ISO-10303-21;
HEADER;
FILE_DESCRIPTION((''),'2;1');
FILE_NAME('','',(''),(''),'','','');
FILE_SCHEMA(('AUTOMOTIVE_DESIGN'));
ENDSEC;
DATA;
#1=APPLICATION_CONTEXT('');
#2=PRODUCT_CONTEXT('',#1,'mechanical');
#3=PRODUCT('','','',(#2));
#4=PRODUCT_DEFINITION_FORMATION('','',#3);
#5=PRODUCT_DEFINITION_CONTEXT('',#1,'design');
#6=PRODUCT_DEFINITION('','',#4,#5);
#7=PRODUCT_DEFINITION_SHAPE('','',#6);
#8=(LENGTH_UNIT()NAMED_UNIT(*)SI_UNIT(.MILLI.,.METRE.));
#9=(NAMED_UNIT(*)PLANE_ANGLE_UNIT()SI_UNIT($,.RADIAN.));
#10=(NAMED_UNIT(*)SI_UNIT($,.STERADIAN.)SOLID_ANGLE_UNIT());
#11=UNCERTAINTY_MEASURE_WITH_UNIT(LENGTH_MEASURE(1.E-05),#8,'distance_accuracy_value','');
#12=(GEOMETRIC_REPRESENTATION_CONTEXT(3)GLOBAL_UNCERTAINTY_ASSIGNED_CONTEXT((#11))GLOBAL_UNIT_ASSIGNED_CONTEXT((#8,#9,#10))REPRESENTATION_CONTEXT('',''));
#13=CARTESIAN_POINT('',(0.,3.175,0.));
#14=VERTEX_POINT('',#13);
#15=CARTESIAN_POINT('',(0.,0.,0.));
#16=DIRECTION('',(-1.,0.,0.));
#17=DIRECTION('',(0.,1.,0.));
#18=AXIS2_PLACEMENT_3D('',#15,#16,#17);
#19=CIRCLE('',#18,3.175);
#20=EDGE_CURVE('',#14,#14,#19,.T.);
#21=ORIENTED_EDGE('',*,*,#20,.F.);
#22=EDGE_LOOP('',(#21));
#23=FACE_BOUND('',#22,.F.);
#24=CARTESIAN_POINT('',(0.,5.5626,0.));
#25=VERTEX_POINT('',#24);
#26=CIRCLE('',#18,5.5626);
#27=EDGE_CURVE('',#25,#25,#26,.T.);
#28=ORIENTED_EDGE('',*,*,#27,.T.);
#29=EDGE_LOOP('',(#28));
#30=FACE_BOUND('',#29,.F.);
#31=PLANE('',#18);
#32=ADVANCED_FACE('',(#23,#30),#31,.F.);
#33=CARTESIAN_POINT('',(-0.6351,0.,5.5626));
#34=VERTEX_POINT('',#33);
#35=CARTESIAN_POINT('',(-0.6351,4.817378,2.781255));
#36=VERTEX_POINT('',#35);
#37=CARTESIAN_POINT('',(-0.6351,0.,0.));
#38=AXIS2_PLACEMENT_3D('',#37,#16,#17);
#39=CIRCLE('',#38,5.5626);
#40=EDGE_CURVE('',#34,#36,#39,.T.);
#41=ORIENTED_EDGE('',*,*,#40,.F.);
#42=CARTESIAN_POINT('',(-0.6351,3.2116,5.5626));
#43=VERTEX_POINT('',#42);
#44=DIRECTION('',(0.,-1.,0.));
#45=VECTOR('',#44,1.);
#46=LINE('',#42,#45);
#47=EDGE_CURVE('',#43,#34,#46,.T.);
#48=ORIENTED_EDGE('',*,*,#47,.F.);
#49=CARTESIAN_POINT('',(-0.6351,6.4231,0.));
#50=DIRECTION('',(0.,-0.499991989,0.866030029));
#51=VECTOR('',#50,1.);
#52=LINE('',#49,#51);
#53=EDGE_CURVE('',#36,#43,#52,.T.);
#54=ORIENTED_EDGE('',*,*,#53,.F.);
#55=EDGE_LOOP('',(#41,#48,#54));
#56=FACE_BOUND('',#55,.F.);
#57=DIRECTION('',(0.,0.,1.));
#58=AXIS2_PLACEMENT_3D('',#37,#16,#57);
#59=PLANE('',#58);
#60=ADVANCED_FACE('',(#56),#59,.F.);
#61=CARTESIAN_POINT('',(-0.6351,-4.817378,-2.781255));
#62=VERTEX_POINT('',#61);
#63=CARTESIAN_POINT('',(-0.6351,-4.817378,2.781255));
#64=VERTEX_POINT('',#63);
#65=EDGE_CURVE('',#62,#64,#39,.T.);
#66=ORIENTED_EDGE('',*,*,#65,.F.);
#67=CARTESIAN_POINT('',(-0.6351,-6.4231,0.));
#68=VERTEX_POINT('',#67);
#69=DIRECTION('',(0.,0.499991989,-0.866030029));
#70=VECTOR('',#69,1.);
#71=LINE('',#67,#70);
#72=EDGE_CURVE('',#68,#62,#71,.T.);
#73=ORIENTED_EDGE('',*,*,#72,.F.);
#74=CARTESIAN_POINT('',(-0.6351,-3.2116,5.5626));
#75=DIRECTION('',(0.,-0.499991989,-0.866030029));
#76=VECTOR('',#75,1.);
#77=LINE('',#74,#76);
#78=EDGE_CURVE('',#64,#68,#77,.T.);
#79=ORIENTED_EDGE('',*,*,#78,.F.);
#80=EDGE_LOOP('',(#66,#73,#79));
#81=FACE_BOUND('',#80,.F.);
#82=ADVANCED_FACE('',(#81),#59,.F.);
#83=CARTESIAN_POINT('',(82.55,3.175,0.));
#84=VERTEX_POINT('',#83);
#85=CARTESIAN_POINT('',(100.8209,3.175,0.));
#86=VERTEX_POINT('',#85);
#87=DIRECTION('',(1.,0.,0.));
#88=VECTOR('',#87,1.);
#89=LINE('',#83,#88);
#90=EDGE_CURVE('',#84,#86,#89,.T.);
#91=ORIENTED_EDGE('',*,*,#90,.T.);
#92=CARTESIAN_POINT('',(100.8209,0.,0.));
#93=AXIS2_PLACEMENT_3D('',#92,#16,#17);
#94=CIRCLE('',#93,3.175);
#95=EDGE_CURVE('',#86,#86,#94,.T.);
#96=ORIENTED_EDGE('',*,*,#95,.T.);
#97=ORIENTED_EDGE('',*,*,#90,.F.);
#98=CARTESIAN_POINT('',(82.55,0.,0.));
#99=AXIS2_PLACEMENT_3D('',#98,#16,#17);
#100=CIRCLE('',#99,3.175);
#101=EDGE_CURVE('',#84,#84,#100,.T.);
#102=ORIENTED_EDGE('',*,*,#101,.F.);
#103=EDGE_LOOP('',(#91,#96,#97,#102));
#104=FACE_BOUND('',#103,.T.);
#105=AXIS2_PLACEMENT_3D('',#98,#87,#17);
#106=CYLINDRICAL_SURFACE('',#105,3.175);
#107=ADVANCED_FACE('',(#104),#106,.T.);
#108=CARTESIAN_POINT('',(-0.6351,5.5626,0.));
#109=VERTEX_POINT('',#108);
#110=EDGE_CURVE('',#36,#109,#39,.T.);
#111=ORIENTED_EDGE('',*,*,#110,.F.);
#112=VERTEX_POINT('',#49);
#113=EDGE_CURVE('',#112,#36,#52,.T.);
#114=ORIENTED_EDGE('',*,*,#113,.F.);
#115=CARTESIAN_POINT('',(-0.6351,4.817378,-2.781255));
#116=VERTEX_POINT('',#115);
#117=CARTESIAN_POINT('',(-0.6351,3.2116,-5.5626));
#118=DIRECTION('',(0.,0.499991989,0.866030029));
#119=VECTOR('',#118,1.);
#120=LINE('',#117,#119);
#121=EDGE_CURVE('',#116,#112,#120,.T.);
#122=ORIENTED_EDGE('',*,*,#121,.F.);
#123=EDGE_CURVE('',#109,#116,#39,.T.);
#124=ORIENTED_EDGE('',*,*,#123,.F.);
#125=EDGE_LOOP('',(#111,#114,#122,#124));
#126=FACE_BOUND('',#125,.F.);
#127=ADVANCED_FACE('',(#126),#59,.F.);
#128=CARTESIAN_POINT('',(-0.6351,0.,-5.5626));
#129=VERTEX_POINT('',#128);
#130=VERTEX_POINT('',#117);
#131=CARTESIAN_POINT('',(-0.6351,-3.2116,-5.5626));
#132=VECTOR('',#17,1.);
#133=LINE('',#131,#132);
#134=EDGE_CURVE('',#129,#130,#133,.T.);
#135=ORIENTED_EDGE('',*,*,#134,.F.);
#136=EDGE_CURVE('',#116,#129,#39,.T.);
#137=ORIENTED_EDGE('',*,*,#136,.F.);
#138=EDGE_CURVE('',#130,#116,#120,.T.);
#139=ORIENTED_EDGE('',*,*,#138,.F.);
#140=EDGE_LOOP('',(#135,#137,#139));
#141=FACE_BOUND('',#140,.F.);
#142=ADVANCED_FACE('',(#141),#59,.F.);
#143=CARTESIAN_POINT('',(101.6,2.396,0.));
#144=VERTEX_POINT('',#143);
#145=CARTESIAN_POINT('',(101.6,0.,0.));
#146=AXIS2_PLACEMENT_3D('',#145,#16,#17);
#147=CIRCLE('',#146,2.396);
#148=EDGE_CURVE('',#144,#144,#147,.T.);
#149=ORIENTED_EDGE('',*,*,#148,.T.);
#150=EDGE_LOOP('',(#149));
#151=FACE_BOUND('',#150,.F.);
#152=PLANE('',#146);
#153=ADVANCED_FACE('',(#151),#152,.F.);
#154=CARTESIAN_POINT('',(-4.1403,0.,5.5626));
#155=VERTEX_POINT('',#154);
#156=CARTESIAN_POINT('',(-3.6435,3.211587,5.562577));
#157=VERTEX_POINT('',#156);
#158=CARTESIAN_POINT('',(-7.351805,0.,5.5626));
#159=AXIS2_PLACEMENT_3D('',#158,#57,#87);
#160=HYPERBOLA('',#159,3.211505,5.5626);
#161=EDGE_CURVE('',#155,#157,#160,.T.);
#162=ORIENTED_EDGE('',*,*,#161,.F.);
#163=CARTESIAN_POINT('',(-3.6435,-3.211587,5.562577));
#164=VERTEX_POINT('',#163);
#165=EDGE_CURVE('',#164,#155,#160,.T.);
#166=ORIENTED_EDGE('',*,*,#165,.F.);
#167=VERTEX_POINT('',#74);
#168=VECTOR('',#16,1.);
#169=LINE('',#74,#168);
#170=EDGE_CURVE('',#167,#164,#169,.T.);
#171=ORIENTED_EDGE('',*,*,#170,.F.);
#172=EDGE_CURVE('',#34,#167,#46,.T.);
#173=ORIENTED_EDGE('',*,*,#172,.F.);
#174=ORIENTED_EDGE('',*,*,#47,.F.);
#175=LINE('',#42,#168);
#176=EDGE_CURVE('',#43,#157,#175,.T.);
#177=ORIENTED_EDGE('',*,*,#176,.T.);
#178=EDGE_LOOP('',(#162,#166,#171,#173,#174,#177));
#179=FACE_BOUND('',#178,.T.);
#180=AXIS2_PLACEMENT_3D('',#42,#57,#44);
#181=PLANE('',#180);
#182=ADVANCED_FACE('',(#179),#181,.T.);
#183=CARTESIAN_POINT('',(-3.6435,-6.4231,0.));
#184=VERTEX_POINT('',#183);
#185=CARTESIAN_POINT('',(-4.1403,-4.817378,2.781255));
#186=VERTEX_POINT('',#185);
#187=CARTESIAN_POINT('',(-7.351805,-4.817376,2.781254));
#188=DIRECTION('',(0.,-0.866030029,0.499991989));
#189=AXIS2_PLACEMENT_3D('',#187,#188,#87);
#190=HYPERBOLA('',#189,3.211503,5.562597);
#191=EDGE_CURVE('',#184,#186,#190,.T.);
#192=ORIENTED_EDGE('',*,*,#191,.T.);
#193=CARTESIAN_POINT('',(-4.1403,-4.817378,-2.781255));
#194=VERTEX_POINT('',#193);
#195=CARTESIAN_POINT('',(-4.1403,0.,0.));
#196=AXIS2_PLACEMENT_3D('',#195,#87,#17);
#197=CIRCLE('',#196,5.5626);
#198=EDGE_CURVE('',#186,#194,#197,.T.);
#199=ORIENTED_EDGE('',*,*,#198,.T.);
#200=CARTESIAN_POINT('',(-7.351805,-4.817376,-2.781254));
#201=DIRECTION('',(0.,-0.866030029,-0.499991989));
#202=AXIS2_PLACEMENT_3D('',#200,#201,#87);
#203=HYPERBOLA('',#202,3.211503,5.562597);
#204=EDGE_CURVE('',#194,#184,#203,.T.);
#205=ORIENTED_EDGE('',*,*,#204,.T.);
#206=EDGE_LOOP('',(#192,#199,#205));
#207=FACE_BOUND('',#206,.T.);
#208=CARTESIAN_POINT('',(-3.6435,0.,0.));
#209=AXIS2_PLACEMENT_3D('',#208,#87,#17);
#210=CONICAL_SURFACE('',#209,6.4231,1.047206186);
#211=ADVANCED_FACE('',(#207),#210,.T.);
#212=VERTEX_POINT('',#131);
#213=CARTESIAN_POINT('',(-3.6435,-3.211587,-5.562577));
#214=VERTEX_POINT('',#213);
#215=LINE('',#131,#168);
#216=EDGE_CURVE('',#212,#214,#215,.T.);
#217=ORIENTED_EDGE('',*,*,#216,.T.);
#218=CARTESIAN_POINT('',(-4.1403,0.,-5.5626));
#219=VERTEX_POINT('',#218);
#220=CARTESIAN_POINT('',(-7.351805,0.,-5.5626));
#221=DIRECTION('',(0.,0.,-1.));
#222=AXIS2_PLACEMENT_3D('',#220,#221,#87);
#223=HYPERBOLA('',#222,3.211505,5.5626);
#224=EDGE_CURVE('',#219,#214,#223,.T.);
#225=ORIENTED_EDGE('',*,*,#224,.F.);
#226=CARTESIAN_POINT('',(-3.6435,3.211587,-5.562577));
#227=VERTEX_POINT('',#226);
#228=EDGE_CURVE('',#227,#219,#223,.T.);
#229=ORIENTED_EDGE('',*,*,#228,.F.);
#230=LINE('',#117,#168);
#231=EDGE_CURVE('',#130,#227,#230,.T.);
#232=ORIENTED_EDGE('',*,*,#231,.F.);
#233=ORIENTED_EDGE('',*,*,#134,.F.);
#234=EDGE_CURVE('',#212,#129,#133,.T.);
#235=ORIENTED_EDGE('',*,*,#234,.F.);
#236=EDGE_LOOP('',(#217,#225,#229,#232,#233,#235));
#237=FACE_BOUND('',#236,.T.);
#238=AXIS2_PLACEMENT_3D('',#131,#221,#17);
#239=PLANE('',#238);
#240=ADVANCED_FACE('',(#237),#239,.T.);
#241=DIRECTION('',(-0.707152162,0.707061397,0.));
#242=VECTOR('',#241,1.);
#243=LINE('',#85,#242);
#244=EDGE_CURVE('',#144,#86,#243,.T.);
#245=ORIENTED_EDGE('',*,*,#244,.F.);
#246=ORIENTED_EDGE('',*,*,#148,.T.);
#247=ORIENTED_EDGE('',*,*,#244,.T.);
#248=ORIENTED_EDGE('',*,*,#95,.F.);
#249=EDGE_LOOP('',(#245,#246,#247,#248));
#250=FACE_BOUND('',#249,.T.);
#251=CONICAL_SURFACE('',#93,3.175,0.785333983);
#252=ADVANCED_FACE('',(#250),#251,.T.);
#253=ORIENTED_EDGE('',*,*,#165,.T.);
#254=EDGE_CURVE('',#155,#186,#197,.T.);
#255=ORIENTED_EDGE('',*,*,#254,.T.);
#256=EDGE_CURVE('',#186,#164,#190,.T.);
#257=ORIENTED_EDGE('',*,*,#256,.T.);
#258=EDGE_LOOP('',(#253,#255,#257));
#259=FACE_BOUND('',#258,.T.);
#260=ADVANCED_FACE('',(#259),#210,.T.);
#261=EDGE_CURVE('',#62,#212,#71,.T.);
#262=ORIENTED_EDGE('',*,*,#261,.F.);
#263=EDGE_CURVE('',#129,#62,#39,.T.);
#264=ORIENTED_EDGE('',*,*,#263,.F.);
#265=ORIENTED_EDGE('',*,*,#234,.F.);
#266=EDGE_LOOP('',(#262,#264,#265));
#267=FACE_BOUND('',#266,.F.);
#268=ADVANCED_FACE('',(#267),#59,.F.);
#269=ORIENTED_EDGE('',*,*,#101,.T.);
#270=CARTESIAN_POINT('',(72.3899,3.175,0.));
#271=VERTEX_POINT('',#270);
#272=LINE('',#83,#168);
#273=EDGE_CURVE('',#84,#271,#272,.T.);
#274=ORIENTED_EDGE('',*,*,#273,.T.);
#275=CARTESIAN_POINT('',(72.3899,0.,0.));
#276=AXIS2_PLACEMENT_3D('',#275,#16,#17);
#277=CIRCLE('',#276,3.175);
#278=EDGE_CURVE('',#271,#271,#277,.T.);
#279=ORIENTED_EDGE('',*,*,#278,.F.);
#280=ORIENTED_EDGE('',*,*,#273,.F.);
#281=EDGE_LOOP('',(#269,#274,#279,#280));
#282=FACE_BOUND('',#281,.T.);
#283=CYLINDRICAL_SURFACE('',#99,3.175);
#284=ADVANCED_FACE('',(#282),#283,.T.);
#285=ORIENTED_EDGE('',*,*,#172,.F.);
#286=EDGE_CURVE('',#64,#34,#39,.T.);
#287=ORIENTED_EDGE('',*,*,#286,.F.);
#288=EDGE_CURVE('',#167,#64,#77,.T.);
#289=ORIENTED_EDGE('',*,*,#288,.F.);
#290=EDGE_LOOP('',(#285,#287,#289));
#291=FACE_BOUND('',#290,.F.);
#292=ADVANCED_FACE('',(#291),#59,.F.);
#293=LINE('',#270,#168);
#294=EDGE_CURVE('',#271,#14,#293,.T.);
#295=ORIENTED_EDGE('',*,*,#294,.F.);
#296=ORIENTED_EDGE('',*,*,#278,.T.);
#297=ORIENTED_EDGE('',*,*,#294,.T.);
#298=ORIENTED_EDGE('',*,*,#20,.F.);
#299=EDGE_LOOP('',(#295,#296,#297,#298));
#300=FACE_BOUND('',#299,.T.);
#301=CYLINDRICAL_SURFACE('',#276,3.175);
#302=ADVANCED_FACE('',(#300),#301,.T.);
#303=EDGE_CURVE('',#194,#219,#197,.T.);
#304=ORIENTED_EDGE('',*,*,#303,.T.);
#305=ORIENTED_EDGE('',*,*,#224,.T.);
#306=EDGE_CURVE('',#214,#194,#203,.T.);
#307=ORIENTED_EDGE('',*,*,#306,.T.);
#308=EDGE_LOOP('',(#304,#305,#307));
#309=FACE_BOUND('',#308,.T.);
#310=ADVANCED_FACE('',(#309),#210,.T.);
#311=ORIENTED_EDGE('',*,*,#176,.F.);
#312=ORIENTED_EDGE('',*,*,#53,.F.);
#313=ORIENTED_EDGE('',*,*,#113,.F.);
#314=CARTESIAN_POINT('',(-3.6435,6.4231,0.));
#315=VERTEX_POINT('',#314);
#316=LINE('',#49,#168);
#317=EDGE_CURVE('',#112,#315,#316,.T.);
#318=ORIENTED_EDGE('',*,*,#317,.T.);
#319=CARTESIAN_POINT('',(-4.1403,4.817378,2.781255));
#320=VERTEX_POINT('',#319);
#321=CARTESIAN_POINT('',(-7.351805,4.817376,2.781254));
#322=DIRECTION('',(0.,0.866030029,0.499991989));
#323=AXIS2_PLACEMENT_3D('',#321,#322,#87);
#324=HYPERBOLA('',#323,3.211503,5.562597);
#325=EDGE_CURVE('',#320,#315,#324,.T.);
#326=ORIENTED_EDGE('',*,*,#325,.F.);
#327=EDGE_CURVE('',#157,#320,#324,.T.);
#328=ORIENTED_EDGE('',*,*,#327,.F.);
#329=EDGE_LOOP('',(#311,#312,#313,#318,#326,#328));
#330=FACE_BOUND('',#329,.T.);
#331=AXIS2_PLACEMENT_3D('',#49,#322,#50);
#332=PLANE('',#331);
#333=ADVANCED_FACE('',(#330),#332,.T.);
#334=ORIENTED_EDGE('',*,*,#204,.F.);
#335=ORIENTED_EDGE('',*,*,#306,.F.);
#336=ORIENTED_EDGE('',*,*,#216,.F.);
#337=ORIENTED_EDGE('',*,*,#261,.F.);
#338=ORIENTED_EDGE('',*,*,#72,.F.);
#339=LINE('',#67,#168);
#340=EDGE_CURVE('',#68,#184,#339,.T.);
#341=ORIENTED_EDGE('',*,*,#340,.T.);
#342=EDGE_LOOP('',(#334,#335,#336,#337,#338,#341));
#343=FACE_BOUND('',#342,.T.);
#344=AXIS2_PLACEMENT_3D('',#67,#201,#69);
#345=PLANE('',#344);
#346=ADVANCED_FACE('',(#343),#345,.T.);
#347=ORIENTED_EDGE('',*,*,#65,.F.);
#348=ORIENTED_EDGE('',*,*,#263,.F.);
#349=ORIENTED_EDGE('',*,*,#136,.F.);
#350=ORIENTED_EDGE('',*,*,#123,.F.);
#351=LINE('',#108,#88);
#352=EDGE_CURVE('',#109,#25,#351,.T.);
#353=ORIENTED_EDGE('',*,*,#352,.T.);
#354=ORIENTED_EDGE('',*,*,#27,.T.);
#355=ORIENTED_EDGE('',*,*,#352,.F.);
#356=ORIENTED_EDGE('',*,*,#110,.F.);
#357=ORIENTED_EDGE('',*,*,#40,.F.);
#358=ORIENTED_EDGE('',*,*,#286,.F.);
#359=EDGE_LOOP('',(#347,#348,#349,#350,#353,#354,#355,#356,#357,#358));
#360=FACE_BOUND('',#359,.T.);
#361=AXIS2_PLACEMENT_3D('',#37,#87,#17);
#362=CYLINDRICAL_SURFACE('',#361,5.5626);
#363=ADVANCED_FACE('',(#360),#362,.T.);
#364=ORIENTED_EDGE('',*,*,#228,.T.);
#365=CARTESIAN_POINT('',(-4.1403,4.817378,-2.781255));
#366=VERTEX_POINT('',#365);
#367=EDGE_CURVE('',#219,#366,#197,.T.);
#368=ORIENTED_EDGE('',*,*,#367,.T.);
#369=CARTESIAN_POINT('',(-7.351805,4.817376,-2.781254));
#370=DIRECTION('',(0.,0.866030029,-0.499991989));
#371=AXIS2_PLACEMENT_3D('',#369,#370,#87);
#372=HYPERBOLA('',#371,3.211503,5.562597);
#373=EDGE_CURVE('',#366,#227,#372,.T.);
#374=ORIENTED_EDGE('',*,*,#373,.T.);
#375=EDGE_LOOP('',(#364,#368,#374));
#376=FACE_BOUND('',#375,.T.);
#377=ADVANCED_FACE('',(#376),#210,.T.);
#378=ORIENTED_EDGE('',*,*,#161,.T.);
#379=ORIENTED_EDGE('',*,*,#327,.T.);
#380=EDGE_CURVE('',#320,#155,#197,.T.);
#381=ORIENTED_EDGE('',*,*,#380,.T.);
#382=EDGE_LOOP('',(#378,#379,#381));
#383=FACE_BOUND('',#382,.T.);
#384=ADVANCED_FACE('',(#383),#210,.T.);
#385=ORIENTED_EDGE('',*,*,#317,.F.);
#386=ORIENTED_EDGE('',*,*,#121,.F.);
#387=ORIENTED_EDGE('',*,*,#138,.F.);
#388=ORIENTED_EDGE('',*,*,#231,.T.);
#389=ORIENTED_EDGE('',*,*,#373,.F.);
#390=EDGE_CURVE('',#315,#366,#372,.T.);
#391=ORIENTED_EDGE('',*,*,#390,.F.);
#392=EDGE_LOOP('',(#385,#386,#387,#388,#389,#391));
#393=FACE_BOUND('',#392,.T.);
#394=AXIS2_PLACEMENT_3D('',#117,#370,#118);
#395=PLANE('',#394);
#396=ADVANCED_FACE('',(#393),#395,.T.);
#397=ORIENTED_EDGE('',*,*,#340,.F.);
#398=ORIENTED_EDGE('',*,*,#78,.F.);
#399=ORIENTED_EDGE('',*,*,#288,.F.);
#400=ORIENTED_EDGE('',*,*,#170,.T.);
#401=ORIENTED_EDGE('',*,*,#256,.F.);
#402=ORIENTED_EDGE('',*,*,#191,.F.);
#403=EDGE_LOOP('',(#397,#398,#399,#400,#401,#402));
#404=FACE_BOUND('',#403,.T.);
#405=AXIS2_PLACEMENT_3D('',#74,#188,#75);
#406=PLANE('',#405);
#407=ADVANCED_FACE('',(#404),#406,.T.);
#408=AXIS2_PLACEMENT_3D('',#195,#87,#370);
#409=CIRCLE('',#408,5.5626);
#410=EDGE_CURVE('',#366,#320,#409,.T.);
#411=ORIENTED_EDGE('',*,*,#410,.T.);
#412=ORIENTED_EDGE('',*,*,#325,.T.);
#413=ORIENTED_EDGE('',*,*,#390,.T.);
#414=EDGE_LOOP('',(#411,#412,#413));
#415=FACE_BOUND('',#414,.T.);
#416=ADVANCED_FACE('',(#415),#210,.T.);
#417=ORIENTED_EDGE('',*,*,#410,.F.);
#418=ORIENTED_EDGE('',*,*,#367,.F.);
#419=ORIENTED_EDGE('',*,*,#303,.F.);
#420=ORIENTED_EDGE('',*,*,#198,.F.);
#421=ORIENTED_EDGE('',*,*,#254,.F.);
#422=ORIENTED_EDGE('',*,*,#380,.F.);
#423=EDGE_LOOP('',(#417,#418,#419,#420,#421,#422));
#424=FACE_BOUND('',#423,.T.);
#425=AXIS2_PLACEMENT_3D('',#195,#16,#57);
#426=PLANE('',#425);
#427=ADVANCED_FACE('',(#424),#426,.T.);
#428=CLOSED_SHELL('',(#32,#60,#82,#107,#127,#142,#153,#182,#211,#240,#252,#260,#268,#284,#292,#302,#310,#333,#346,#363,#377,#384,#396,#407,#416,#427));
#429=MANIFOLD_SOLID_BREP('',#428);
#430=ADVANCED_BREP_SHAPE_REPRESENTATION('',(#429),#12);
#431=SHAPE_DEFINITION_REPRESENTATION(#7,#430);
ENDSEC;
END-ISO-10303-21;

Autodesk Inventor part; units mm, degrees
ref_plane "YZ Plane" through (0, 0, 0) normal (1, 0, 0) x (0, 1, 0)
ref_plane "XZ Plane" through (0, 0, 0) normal (0, 1, 0) x (-1, 0, 0)
sketch "Sketch1" plane through (0, 0, 0) normal (0, 0, 1) x (1, 0, 0)
  line L0 (0, 5.5626) -> (0, 3.175)
  line L1 (82.55, 3.175) -> (101.6, 3.175)
  line L2 (101.6, 3.175) -> (101.6, 0)
  line L3 (101.6, 0) -> (-0.6351, 0)
  line L4 (-21.0821, 0) -> (122.047, 0) projected
  line L5 (-0.6351, 0) -> (-0.6351, 5.5626)
  line L6 (-0.6351, 5.5626) -> (0, 5.5626)
  line L7 (82.55, 3.175) -> (72.3899, 3.175)
  line L8 (72.3899, 3.175) -> (0, 3.175)
  line L9 (0, -1.1125) -> (0, 6.6751) projected
  dimension "d0" = 101.6
  dimension "d1" = 19.05
  dimension "d2" = 6.35
  dimension "d9" = 0.6351
  dimension "d10" = 11.1252
  dimension "d13" = 10.1601
  dimension "d14" = 6.35
revolve "Body" add sketch "Sketch1" angle 360 about axis through (101.6, 0, 0) along (-1, 0, 0)
sketch "Sketch2" plane through (-0.6351, 0, 0) normal (-1, 0, 0) x (0, 0, 1)
  line L0 (0, 6.4231) -> (5.5626, 3.2116)
  line L1 (5.5626, 3.2116) -> (5.5626, -3.2116)
  line L2 (5.5626, -3.2116) -> (0, -6.4231)
  line L3 (0, -6.4231) -> (-5.5626, -3.2116)
  line L4 (-5.5626, -3.2116) -> (-5.5626, 3.2116)
  line L5 (-5.5626, 3.2116) -> (0, 6.4231)
  point P0 (0, 0)
  point P1 (0, 0)
  dimension "d11" = 11.1252
extrude "Head" add sketch "Sketch2" along normal blind 3.5052
sketch "Sketch4" plane through (0, 0, 0) normal (0, 0, 1) x (1, 0, 0)
  line L0 (-4.1403, 5.5626) -> (-4.1403, 6.4231)
  line L1 (-4.1403, 6.4231) -> (-3.6435, 6.4231)
  line L2 (-3.6435, 6.4231) -> (-4.1403, 5.5626)
  line L3 (-4.8413, 0) -> (0.0659, 0) projected
  line L4 (-0.6351, 6.4231) -> (-4.1403, 6.4231) projected
  line L5 (-4.1403, 3.2116) -> (-4.1403, 6.4231) projected
  dimension "d5" = 30
  dimension "d19" = 11.1252
revolve "Chamfer1" cut sketch "Sketch4" angle 360 about axis through (-10, 0, 0) along (1, 0, 0)
thread "Thread" size "1/4-20 UNC" class "2A" standard "ANSI Unified Screw Threads" length 19.05
chamfer "Chamfer2" distance 0.779 distance2 0.7791 1 edges at (101.6, -3.175, 0) measured on face at (101.6, -0.0416, -0.7018)
ref_plane "Work Plane1" through (1.525, 0, 0) normal (0, 0, 1) x (1, 0, 0)
equation "\"d0\" = NLG"
equation "\"d1\" = GEL"
equation "\"d2\" = GD"
equation "\"d10\" = SD2"
equation "\"d14\" = BDM"
equation "\"d11\" = SW"
equation "\"d3\" = KOH - SD"
equation "\"d5\" = ANG1"
equation "\"d19\" = SW0"
equation "\"d15\" = GEL"
equation "\"d6\" = -0.5 * SPD + 0.5 * GD"
equation "\"NLG\" = 101.6"
equation "\"GD\" = 6.35"
equation "\"BDM\" = 6.35"
equation "\"KOH\" = 4.1402"
equation "\"GEL\" = 19.05"
equation "\"SW\" = 11.1252"
equation "\"SW0\" = SW"
equation "\"SPD\" = GD1"
equation "\"SD2\" = SW"
equation "\"SD\" = 0.635"
equation "\"ANG1\" = 30deg"
equation "\"GAL\" = 10.16"
equation "\"GUL\" = 0.77902"
equation "\"RR\" = 0.381"
equation "\"WFT\" = SD"
equation "\"GD1\" = 4.79196"
equation "\"THREADDIA\" = 6.35"
equation "\"SDH\" = SW"
equation "\"SDHG\" = 72.39"
equation "\"TOA\" = 30deg"
equation "\"FAWI\" = 45deg"
equation "\"NND\" = 6.35"
equation "\"E0\" = 12.84961"
properties part number "AS 2465 - 1/4 x 4  UNC" material "Steel, Mild"
